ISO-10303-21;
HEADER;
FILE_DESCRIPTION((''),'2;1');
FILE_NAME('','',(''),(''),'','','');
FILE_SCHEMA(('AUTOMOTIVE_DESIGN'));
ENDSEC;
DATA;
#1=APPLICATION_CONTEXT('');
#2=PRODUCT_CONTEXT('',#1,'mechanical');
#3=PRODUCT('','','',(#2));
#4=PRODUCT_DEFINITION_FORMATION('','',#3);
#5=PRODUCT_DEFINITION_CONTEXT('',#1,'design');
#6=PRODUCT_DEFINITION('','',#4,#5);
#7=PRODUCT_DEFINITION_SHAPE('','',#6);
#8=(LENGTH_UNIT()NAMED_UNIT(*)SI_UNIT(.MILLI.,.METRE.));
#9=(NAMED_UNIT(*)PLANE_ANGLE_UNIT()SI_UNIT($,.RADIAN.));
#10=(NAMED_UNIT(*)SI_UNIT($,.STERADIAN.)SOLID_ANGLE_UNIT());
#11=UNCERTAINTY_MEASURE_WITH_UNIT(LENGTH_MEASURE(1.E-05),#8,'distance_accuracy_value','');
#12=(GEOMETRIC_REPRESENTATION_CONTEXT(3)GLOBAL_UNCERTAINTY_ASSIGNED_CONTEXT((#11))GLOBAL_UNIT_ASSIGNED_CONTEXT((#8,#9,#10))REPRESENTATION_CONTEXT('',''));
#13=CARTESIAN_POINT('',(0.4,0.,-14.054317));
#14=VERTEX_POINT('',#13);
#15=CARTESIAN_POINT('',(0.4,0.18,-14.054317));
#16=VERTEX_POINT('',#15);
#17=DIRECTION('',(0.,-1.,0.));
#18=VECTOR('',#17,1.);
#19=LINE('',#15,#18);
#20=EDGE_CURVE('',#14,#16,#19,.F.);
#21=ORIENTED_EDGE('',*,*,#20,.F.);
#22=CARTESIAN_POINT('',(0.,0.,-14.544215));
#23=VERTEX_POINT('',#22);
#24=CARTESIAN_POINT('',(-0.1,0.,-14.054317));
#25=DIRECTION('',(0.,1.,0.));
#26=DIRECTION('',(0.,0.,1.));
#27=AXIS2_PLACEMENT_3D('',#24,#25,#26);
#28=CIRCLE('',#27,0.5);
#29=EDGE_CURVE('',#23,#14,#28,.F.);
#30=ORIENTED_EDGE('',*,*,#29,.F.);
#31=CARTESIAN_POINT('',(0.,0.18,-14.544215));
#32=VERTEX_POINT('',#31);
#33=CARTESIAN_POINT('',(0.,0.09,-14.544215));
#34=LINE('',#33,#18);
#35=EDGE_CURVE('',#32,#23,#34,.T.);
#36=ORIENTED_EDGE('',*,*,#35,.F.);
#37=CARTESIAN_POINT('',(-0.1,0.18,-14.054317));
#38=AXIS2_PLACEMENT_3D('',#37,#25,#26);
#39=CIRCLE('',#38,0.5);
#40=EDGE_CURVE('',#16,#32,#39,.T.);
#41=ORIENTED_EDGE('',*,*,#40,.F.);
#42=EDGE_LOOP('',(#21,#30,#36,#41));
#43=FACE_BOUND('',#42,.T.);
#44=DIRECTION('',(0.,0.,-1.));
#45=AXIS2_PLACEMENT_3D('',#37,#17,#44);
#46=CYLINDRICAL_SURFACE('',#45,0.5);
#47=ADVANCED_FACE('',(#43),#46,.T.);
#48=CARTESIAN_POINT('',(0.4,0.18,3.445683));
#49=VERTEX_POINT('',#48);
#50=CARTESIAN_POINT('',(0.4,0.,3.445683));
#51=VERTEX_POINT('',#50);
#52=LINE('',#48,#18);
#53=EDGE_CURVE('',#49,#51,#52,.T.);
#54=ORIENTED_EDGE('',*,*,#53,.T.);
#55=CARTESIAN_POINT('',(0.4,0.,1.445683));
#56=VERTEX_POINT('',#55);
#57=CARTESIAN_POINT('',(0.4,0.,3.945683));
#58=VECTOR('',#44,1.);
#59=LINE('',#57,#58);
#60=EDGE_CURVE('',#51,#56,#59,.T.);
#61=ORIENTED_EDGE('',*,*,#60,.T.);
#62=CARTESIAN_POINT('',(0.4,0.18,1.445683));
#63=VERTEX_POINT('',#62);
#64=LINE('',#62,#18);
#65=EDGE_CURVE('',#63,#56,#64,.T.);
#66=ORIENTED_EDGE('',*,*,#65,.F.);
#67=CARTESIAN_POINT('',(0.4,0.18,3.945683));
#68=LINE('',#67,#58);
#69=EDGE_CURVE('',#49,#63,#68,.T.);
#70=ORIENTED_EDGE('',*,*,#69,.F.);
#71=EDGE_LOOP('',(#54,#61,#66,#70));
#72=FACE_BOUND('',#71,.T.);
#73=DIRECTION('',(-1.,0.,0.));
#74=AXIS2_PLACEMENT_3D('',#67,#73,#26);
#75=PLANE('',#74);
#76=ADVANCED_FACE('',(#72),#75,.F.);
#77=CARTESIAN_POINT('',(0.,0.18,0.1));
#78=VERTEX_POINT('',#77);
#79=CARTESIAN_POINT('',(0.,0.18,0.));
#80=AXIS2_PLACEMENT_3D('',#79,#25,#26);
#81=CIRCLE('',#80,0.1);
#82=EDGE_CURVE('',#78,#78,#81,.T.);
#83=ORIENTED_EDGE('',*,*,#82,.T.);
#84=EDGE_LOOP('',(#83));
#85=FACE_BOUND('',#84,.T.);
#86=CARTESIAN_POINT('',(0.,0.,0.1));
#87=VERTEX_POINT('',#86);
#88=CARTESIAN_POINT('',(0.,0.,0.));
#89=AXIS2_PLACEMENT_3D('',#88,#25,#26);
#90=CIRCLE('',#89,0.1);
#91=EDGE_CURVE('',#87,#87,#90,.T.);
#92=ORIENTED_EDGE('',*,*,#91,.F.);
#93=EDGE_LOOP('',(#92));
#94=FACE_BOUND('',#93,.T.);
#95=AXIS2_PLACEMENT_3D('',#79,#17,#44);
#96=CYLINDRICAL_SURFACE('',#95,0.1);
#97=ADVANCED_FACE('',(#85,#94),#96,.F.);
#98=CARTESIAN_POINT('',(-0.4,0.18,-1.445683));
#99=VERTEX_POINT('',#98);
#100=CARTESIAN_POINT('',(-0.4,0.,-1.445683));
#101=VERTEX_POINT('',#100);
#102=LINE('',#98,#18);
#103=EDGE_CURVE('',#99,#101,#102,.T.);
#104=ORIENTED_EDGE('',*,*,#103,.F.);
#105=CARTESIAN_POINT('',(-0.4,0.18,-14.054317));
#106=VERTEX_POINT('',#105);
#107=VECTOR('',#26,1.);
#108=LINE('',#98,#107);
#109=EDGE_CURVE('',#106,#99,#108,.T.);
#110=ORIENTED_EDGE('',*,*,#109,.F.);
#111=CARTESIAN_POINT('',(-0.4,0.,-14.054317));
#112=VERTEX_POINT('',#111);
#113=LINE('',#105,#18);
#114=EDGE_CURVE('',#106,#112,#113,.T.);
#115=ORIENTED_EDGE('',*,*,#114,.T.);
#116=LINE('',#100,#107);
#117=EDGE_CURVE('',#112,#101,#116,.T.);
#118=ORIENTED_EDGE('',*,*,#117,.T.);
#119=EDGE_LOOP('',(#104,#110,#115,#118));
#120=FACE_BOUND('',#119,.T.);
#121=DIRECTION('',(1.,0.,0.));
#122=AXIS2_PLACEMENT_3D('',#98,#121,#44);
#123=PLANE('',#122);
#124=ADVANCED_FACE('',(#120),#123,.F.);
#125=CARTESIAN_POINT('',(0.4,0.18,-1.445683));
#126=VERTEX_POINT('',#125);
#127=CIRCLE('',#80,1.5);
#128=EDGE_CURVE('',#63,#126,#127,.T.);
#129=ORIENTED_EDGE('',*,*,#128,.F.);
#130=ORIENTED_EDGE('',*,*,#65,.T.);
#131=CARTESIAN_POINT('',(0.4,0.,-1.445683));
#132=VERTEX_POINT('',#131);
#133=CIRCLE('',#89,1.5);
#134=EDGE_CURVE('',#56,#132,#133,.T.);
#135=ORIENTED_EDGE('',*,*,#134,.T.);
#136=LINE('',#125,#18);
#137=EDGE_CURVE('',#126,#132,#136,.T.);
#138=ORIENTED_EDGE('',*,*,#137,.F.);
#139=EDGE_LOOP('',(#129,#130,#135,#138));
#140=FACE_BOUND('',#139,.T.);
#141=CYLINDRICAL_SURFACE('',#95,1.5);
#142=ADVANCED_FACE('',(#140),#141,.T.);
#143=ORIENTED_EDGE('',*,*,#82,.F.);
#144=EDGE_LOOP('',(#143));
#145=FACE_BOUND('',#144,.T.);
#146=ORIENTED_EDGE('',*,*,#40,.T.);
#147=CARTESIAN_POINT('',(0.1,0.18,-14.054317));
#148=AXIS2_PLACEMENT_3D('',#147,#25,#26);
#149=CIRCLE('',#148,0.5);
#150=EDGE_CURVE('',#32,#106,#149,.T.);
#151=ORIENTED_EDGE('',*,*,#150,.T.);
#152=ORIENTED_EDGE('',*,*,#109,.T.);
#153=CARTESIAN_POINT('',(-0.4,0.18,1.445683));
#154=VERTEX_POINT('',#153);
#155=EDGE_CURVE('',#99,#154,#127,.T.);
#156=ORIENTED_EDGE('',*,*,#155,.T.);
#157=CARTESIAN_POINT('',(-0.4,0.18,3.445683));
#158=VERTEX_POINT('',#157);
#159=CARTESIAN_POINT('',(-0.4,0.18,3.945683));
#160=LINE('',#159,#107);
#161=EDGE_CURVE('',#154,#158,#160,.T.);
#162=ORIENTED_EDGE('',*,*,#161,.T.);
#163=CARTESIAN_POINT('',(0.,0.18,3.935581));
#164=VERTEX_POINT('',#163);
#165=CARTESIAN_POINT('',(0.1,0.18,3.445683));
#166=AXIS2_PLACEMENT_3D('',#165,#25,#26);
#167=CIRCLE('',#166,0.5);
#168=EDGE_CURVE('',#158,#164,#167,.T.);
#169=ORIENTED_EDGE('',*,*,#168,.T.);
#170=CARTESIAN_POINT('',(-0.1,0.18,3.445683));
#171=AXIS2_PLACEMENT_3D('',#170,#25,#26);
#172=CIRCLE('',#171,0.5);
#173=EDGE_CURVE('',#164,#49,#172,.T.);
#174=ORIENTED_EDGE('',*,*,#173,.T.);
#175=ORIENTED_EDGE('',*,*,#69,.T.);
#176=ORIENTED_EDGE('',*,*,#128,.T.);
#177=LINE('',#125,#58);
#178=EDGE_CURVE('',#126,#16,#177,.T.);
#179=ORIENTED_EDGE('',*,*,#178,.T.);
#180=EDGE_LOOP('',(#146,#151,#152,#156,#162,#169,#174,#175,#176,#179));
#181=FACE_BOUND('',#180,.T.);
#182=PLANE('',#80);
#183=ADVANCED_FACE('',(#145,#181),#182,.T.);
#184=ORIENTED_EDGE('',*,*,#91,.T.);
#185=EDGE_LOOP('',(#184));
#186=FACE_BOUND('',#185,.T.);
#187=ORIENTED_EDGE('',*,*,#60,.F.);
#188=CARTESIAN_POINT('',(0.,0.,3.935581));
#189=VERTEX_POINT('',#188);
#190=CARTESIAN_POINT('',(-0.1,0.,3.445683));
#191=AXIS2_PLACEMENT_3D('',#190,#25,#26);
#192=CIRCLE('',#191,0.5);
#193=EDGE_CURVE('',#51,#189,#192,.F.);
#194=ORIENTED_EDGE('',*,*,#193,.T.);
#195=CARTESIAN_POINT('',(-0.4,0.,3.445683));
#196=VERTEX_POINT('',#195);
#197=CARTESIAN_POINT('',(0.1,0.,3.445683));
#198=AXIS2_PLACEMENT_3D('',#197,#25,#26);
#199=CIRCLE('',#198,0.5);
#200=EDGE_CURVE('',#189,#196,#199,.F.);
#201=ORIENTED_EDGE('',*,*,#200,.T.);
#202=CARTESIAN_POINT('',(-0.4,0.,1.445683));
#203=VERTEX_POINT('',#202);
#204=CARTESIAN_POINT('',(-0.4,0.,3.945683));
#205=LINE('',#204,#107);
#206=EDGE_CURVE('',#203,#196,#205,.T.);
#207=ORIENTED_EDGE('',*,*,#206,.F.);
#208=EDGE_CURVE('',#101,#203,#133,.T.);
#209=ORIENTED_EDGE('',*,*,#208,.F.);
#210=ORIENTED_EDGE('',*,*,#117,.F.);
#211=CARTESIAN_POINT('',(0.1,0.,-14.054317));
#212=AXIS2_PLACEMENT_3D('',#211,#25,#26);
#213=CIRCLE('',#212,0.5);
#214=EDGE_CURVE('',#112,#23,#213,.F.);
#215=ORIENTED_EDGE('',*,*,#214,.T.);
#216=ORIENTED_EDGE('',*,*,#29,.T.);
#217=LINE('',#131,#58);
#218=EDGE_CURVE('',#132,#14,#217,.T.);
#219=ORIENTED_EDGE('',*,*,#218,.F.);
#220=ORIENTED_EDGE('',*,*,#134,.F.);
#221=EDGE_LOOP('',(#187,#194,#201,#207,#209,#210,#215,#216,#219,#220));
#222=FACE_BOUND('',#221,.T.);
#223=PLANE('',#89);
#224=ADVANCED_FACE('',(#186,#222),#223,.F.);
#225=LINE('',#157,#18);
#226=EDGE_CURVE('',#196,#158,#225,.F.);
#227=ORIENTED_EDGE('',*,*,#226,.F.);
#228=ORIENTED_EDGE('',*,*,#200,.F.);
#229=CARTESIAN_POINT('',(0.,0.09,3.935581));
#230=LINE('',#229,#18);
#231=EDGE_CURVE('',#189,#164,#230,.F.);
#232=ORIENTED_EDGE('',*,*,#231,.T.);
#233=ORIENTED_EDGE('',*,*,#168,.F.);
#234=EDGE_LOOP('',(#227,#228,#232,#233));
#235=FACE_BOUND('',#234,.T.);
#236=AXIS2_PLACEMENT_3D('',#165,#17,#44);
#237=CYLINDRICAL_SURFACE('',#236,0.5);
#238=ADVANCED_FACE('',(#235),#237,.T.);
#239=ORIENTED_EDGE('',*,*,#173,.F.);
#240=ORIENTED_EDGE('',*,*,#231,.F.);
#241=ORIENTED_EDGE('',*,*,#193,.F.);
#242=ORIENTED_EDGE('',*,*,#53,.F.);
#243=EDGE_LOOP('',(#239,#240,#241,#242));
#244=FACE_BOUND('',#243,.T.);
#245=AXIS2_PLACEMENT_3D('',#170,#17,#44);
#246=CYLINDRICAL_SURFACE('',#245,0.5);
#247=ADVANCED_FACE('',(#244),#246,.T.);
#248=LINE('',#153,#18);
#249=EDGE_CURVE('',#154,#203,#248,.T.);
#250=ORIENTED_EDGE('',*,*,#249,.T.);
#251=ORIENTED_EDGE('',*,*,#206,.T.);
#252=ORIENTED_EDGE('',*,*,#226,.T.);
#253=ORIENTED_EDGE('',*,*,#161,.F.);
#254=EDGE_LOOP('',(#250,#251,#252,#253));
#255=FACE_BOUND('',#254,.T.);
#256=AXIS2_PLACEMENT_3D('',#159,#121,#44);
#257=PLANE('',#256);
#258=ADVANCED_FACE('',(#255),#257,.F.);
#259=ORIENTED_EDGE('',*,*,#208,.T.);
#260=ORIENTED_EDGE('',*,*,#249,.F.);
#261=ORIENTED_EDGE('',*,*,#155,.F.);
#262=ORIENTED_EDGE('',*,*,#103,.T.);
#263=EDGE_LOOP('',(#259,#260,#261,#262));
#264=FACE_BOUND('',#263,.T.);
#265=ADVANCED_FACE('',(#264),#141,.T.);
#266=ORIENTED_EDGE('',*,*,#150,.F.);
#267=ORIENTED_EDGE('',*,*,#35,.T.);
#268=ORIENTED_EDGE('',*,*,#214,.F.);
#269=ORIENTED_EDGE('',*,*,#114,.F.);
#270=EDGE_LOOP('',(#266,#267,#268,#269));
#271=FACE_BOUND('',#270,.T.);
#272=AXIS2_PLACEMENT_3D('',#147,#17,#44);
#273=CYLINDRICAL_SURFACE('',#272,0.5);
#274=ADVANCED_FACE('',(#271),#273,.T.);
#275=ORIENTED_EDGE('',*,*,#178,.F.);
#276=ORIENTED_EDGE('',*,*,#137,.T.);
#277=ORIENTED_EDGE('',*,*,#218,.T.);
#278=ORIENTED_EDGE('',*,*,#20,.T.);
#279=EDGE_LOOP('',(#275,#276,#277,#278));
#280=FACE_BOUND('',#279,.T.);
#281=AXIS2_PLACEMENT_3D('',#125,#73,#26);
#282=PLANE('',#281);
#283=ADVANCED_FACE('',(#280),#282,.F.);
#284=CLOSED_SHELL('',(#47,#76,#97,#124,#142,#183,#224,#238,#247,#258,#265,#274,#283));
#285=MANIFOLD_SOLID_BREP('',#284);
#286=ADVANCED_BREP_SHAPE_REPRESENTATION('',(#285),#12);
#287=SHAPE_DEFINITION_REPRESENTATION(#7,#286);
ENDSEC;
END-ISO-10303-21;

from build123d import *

# Parameters (mm, degrees)
SKETCH1_R           = 0.1
BOSS_EXTRUDE2_DEPTH = 0.18
FILLET1_R           = 0.5


with BuildPart() as part:
    # Sketch1 → Boss-Extrude2 (new body)
    with BuildSketch(Plane(origin=(0, 0, 0), x_dir=(1, 0, 0), z_dir=(0, 1, 0))):
        with BuildLine():
            Line((-0.4, -3.945683229), (-0.4, -1.445683229))
            ThreePointArc((-0.4, -1.445683229), (-1.5, 0), (-0.4, 1.445683229))
            Line((-0.4, 1.445683229), (-0.4, 14.554316771))
            Line((-0.4, 14.554316771), (0.4, 14.554316771))
            Line((0.4, 14.554316771), (0.4, 1.445683229))
            ThreePointArc((0.4, 1.445683229), (1.5, 0), (0.4, -1.445683229))
            Line((0.4, -1.445683229), (0.4, -3.945683229))
            Line((0.4, -3.945683229), (-0.4, -3.945683229))
        make_face()
        with Locations(Location((0, 0, 0), (0, 0, 270))):
            Circle(SKETCH1_R, mode=Mode.SUBTRACT)
    extrude(amount=BOSS_EXTRUDE2_DEPTH)

    # Fillet1
    # the kernel refuses this fillet: 0.5 mm, written as the material it takes off along each edge
    with BuildSketch(Plane(origin=(-0.4, -1.25, -14.554316771), x_dir=(0, 0, 1), z_dir=(0, 1, 0)), Plane(origin=(0.4, -1.25, -14.554316771), x_dir=(-1, 0, 0), z_dir=(0, 1, 0)), Plane(origin=(-0.4, -1.25, 3.945683229), x_dir=(1, 0, 0), z_dir=(0, 1, 0)), Plane(origin=(0.4, -1.25, 3.945683229), x_dir=(0, 0, -1), z_dir=(0, 1, 0))) as fillet1_piece_1:
        with BuildLine():
            CenterArc((FILLET1_R, FILLET1_R), FILLET1_R, 180, 90)
            Line((0, FILLET1_R), (0, 0))
            Line((0, 0), (FILLET1_R, 0))
        make_face()
    extrude(amount=2.68, mode=Mode.SUBTRACT)


solid = part.part
